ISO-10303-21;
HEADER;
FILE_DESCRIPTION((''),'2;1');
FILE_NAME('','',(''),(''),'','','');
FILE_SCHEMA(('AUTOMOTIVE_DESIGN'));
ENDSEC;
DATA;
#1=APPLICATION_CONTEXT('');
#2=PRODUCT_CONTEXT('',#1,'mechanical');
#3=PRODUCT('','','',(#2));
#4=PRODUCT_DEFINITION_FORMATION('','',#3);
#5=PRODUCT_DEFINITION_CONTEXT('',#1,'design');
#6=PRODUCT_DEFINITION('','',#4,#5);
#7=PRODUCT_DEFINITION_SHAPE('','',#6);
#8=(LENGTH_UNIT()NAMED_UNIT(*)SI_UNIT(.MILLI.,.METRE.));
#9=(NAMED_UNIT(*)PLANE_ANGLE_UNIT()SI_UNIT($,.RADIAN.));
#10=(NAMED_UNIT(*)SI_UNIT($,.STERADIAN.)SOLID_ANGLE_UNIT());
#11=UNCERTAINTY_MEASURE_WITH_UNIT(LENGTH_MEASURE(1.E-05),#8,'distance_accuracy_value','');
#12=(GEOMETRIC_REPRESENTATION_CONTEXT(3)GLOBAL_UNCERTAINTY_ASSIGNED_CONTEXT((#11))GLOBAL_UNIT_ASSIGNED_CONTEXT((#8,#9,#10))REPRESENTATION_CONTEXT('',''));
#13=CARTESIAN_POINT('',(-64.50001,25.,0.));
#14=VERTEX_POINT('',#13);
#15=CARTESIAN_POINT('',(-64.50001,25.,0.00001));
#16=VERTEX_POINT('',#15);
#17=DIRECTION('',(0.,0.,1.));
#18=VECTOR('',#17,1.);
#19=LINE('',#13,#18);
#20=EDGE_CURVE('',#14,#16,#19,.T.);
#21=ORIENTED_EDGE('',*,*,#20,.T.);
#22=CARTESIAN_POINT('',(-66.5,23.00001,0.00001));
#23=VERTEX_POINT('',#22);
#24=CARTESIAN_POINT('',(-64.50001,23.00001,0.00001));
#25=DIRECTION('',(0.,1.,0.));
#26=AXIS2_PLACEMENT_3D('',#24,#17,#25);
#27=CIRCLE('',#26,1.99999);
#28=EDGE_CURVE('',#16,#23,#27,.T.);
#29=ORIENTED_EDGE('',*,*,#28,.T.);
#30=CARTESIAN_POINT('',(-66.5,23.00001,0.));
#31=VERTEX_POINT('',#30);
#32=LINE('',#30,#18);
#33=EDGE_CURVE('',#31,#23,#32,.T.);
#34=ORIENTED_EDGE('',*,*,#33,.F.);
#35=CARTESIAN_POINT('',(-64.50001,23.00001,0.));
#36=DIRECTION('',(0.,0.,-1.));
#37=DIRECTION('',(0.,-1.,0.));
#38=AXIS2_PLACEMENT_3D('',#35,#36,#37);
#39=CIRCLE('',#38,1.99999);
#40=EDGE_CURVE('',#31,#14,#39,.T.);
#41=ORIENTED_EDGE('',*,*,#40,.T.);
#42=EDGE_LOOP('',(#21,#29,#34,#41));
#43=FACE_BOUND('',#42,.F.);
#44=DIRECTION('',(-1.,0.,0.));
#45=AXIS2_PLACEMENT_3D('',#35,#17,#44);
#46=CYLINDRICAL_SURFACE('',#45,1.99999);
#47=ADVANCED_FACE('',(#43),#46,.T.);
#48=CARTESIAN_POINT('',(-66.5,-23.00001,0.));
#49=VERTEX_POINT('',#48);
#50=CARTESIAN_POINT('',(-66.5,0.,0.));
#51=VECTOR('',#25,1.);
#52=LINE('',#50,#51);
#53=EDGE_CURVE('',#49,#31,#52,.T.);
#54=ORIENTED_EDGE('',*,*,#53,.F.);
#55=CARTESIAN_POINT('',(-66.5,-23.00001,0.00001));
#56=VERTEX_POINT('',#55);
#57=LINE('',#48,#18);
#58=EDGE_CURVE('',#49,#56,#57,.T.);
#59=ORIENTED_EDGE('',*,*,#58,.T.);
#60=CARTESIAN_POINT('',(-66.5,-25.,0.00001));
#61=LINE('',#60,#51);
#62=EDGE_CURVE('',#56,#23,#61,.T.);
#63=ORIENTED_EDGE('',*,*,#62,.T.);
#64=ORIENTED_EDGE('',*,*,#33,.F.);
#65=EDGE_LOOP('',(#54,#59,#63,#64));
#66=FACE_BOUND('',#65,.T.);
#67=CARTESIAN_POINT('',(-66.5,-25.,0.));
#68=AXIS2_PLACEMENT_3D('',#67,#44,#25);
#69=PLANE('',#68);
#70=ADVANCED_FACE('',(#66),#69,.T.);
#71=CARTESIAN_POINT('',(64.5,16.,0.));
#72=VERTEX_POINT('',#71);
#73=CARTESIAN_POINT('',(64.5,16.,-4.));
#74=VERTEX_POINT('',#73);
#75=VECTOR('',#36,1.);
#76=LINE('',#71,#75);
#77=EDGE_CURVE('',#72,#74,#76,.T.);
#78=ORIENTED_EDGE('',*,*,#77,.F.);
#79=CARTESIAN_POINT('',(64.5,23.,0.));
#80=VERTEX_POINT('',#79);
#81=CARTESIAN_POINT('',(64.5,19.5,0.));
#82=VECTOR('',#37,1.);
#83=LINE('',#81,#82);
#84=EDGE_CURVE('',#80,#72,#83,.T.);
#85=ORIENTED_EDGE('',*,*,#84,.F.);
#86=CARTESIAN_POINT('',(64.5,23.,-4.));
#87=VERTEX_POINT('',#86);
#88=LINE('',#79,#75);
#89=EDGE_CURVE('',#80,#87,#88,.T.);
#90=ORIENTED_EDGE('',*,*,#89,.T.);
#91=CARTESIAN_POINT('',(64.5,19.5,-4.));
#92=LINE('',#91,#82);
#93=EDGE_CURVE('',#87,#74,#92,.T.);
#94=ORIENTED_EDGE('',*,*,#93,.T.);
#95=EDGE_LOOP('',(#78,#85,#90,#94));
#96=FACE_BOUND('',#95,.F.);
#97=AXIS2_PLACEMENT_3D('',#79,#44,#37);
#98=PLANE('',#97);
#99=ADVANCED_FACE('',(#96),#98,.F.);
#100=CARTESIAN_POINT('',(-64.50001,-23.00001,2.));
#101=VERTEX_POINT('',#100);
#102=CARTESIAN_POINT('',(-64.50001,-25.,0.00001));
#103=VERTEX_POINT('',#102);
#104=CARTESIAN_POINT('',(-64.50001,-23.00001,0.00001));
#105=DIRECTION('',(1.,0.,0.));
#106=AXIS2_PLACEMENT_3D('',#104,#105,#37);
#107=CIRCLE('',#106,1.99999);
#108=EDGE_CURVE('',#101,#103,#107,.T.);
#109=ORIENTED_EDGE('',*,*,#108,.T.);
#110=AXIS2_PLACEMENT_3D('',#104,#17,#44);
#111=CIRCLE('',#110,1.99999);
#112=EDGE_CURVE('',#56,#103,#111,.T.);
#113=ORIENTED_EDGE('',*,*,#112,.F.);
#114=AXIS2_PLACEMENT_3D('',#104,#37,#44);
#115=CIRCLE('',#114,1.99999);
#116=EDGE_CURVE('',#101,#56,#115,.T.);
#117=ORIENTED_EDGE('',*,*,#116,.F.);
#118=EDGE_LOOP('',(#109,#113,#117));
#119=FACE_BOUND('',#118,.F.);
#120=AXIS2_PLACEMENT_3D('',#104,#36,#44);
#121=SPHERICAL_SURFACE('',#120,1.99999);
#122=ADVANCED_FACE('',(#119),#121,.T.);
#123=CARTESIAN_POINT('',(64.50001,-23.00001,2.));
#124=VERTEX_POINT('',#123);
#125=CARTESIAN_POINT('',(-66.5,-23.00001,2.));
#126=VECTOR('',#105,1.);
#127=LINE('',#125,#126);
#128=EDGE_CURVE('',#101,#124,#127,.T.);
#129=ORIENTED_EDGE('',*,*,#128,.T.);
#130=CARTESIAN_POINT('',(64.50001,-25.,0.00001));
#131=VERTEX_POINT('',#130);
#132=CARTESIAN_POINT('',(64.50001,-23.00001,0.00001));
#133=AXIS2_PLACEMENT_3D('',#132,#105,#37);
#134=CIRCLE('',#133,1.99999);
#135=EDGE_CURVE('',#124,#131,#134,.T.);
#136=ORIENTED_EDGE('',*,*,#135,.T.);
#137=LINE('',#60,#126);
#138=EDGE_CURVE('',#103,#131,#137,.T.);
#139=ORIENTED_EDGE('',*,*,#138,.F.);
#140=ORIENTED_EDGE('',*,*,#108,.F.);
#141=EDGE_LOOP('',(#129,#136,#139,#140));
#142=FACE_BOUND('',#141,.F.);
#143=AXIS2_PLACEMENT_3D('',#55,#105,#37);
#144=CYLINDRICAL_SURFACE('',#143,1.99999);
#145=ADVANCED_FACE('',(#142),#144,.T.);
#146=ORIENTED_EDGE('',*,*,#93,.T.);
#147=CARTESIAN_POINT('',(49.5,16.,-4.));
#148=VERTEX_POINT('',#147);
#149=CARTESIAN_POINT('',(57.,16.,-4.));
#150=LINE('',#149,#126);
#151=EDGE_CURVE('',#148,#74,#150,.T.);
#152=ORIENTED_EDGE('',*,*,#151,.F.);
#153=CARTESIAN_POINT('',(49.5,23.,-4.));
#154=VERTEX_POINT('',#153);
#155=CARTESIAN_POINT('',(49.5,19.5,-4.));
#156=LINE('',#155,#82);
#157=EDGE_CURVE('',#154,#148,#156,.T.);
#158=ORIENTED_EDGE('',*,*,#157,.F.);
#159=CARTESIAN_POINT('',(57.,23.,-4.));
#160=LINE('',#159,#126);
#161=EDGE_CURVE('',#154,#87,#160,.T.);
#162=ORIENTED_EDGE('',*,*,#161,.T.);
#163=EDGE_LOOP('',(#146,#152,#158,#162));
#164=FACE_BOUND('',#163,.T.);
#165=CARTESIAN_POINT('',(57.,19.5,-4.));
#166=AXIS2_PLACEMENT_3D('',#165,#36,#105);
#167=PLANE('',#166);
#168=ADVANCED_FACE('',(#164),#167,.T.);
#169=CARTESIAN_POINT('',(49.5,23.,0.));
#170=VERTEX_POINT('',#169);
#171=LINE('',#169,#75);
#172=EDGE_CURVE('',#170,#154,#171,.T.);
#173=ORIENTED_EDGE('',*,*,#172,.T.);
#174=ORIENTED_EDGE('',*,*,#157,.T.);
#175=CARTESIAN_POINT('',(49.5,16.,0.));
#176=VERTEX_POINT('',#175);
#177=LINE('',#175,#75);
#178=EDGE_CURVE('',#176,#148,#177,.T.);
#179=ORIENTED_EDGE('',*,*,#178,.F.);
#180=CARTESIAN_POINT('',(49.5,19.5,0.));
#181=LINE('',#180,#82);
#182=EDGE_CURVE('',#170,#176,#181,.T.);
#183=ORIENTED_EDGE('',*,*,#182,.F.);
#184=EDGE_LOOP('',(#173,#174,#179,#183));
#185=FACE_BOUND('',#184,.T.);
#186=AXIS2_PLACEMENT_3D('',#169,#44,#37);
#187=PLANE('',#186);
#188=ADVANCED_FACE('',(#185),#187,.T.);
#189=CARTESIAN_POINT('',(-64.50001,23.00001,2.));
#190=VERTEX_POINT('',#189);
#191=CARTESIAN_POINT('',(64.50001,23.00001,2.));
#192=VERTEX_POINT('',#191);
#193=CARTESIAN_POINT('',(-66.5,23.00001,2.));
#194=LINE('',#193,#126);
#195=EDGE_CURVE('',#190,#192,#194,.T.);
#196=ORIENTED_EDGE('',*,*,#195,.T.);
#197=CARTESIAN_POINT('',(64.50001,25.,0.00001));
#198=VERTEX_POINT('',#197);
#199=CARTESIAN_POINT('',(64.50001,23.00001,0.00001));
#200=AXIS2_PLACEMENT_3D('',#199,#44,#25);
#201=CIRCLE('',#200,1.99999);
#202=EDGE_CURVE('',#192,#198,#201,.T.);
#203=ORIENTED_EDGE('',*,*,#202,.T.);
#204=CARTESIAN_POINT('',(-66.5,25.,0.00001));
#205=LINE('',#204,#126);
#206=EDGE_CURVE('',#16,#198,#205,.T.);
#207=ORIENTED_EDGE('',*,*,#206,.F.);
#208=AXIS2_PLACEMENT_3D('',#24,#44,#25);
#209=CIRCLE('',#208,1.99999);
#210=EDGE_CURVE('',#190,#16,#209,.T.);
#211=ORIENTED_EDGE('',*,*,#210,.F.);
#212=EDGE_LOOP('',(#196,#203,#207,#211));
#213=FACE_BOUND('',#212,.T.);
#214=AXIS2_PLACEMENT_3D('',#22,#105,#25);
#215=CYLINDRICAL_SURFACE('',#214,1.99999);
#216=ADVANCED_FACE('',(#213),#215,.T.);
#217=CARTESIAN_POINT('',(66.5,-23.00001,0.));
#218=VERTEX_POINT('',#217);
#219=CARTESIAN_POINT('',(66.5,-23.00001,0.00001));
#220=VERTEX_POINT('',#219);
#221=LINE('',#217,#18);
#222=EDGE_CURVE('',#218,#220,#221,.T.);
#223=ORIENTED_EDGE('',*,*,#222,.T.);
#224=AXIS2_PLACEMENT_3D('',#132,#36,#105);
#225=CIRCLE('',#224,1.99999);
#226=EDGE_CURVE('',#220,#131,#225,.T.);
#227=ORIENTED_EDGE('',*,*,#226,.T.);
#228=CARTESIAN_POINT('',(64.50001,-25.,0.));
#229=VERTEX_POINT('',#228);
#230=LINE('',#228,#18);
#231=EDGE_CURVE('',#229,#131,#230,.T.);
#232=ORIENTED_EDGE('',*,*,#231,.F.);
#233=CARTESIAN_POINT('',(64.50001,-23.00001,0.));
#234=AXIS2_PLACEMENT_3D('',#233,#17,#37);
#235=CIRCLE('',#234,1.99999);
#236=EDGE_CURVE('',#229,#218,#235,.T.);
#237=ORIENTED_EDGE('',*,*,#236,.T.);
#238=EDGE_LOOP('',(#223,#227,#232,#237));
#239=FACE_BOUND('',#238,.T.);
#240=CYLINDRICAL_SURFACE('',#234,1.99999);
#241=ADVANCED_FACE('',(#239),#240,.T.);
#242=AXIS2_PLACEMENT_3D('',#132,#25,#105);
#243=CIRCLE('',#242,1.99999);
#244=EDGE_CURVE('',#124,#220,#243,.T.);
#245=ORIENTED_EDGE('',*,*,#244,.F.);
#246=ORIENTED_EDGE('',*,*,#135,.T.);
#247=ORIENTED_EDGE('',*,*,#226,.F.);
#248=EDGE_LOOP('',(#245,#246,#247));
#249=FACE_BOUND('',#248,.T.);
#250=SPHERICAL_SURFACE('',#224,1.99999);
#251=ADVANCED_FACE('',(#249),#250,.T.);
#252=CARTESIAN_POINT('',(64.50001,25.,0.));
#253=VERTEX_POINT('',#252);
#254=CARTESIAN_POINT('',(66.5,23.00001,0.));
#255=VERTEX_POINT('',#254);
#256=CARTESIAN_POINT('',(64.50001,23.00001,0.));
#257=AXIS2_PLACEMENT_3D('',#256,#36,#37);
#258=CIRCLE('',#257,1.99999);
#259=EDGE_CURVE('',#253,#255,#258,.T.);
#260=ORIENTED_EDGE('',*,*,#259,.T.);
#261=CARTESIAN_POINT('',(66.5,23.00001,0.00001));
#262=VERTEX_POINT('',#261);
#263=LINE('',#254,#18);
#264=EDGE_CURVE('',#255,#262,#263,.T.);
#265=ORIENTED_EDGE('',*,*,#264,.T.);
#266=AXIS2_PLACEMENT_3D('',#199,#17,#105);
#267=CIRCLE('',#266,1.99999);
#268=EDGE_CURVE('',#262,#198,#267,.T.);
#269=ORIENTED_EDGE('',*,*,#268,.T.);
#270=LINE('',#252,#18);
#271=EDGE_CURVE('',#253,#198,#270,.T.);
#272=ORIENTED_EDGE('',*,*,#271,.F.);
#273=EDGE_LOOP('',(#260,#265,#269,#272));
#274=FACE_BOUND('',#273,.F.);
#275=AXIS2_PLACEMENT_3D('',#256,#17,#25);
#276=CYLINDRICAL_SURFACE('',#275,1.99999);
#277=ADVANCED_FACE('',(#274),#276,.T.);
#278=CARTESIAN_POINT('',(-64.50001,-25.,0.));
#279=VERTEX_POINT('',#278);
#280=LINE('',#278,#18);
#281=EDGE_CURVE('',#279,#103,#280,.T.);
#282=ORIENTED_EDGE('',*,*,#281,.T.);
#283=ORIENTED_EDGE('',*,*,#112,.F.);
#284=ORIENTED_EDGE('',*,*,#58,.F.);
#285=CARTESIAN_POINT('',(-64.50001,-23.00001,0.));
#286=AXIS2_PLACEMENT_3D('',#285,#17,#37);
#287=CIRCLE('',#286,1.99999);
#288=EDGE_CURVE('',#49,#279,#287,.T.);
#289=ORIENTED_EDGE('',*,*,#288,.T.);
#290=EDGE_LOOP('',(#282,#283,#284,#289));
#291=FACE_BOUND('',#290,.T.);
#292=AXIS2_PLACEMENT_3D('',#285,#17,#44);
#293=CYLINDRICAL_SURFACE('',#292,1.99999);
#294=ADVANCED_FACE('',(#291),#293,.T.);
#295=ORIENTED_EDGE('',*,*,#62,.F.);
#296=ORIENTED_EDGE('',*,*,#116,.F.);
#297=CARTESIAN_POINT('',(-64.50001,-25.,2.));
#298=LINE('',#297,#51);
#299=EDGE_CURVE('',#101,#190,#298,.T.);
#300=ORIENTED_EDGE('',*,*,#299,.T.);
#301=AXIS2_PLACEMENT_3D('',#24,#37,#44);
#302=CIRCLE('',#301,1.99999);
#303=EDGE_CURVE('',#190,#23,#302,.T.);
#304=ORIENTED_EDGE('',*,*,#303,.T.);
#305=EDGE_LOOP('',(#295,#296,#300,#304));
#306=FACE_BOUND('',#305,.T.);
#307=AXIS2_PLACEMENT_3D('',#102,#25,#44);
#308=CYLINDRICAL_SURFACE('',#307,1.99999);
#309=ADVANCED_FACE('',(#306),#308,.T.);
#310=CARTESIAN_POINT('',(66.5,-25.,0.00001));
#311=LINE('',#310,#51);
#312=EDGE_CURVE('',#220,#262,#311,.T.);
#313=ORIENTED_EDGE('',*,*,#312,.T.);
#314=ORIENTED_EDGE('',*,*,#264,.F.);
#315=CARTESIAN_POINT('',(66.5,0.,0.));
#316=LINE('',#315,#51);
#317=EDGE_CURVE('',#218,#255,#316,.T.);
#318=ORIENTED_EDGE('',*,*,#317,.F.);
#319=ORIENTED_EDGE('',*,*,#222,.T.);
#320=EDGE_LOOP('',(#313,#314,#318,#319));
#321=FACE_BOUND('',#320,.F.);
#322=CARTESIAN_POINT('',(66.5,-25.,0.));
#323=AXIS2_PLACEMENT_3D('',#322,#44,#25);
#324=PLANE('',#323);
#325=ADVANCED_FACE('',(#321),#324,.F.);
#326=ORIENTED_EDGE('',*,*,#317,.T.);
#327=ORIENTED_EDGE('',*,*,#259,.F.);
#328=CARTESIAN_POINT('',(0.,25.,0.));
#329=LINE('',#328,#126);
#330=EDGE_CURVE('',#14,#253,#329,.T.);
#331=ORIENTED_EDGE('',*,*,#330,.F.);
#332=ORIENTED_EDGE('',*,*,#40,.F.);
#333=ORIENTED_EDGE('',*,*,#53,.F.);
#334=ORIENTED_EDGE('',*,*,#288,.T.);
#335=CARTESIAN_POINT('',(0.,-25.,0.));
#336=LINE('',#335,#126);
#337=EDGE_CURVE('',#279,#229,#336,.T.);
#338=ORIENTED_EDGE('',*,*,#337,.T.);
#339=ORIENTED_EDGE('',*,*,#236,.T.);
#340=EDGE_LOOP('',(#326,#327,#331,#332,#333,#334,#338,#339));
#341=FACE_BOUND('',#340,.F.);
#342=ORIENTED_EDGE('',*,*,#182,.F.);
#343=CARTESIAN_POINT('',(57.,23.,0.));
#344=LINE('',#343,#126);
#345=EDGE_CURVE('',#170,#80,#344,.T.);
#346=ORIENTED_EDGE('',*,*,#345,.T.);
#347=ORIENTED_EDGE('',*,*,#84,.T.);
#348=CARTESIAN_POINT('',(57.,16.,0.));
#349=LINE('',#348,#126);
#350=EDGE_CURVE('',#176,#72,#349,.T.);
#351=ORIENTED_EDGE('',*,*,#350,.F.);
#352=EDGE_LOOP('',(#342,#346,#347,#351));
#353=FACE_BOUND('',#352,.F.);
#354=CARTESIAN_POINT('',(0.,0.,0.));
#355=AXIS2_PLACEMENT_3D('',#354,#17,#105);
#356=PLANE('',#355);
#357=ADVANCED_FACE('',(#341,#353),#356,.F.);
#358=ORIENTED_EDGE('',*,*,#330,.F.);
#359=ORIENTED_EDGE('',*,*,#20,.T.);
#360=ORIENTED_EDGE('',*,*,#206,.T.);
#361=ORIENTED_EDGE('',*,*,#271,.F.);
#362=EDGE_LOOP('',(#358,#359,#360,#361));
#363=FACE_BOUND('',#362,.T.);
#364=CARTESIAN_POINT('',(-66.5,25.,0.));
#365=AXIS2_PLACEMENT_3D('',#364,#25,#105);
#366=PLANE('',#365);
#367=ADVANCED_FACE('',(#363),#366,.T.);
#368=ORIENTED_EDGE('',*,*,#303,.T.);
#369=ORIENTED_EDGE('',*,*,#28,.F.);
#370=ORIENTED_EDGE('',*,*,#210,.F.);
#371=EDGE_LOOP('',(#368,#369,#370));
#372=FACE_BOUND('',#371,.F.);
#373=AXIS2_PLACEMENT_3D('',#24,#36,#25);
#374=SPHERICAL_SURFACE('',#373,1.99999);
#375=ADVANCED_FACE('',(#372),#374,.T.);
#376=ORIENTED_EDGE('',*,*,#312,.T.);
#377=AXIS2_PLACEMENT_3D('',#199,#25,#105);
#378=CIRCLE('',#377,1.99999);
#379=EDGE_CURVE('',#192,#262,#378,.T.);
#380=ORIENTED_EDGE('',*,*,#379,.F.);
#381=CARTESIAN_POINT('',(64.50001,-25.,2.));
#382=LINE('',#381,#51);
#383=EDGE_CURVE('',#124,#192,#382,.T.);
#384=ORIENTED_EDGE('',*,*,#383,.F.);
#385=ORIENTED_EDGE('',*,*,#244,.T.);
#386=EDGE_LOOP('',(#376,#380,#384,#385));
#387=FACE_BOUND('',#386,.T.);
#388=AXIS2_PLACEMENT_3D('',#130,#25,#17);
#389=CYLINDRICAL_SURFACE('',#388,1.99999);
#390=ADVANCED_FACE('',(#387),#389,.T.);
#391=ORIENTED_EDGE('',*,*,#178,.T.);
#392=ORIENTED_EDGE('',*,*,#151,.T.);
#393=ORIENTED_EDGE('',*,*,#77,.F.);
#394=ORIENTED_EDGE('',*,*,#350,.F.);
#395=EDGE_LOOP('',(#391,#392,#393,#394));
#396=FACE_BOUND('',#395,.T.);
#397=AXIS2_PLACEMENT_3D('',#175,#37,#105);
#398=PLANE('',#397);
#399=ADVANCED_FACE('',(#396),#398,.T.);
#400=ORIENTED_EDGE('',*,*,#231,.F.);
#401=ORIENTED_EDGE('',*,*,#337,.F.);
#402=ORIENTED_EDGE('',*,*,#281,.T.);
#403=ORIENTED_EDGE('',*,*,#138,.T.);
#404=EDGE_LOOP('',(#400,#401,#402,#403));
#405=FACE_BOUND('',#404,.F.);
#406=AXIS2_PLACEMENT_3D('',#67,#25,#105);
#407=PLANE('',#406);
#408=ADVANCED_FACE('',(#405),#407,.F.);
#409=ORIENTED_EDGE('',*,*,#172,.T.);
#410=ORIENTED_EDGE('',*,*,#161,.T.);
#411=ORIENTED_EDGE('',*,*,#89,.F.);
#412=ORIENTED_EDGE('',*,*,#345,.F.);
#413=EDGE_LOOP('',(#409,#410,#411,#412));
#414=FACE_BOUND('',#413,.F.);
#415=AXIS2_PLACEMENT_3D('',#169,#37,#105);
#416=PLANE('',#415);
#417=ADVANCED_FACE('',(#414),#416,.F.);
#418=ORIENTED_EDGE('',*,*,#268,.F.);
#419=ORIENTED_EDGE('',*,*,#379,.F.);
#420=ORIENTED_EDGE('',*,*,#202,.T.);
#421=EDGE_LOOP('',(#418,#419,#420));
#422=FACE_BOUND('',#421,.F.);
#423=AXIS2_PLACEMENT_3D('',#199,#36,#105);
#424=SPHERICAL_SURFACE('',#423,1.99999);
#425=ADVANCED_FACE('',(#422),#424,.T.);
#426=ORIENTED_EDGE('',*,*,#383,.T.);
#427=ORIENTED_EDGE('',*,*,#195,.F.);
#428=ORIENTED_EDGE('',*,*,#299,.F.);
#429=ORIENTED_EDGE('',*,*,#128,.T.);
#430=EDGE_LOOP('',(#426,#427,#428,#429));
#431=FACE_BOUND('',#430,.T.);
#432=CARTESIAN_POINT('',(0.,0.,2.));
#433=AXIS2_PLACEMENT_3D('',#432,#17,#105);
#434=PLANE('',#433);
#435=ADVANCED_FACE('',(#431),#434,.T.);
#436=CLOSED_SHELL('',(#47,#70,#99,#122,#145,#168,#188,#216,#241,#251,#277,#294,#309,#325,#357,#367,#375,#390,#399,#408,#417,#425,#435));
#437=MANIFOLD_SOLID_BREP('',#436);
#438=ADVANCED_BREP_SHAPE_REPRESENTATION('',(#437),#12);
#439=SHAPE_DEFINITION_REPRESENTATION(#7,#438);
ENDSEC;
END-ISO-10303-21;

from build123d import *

# Parameters (mm, degrees)
F0_W     = 133
F0_H     = 50
F1_DEPTH = 2
F2_W     = 15
F2_H     = 7
F3_DEPTH = 4
F4_R     = 1.99999


# Not quite as in the source:
# - a fillet or chamfer is up to 0.001 mm smaller than in the source, because OpenCascade refuses the exact size


with BuildPart() as f1:
    # F0 (on Top) → F1 (new body)
    with BuildSketch(Plane.XY):
        Rectangle(F0_W, F0_H)
    extrude(amount=F1_DEPTH)

    # F2 (on face) → F3 (join)
    with BuildSketch(Plane(origin=(0, 0, 0), x_dir=(1, 0, 0), z_dir=(0, 0, -1))):
        with Locations((57, -19.5)):
            Rectangle(F2_W, F2_H)
    extrude(amount=F3_DEPTH)

    # F4 (radius 2 in the source; OpenCascade refuses exactly that, so slightly less here)
    f4_edges = [f1.edges().sort_by_distance(p)[0] for p in [
        (66.5, 25, 1),
        (66.5, -25, 1),
        (-66.5, 25, 1),
        (-66.5, -25, 1),
        (66.5, 0, 2),
        (0, 25, 2),
        (-66.5, 0, 2),
        (0, -25, 2),
    ]]
    fillet(f4_edges, radius=F4_R)


solid = f1.part
